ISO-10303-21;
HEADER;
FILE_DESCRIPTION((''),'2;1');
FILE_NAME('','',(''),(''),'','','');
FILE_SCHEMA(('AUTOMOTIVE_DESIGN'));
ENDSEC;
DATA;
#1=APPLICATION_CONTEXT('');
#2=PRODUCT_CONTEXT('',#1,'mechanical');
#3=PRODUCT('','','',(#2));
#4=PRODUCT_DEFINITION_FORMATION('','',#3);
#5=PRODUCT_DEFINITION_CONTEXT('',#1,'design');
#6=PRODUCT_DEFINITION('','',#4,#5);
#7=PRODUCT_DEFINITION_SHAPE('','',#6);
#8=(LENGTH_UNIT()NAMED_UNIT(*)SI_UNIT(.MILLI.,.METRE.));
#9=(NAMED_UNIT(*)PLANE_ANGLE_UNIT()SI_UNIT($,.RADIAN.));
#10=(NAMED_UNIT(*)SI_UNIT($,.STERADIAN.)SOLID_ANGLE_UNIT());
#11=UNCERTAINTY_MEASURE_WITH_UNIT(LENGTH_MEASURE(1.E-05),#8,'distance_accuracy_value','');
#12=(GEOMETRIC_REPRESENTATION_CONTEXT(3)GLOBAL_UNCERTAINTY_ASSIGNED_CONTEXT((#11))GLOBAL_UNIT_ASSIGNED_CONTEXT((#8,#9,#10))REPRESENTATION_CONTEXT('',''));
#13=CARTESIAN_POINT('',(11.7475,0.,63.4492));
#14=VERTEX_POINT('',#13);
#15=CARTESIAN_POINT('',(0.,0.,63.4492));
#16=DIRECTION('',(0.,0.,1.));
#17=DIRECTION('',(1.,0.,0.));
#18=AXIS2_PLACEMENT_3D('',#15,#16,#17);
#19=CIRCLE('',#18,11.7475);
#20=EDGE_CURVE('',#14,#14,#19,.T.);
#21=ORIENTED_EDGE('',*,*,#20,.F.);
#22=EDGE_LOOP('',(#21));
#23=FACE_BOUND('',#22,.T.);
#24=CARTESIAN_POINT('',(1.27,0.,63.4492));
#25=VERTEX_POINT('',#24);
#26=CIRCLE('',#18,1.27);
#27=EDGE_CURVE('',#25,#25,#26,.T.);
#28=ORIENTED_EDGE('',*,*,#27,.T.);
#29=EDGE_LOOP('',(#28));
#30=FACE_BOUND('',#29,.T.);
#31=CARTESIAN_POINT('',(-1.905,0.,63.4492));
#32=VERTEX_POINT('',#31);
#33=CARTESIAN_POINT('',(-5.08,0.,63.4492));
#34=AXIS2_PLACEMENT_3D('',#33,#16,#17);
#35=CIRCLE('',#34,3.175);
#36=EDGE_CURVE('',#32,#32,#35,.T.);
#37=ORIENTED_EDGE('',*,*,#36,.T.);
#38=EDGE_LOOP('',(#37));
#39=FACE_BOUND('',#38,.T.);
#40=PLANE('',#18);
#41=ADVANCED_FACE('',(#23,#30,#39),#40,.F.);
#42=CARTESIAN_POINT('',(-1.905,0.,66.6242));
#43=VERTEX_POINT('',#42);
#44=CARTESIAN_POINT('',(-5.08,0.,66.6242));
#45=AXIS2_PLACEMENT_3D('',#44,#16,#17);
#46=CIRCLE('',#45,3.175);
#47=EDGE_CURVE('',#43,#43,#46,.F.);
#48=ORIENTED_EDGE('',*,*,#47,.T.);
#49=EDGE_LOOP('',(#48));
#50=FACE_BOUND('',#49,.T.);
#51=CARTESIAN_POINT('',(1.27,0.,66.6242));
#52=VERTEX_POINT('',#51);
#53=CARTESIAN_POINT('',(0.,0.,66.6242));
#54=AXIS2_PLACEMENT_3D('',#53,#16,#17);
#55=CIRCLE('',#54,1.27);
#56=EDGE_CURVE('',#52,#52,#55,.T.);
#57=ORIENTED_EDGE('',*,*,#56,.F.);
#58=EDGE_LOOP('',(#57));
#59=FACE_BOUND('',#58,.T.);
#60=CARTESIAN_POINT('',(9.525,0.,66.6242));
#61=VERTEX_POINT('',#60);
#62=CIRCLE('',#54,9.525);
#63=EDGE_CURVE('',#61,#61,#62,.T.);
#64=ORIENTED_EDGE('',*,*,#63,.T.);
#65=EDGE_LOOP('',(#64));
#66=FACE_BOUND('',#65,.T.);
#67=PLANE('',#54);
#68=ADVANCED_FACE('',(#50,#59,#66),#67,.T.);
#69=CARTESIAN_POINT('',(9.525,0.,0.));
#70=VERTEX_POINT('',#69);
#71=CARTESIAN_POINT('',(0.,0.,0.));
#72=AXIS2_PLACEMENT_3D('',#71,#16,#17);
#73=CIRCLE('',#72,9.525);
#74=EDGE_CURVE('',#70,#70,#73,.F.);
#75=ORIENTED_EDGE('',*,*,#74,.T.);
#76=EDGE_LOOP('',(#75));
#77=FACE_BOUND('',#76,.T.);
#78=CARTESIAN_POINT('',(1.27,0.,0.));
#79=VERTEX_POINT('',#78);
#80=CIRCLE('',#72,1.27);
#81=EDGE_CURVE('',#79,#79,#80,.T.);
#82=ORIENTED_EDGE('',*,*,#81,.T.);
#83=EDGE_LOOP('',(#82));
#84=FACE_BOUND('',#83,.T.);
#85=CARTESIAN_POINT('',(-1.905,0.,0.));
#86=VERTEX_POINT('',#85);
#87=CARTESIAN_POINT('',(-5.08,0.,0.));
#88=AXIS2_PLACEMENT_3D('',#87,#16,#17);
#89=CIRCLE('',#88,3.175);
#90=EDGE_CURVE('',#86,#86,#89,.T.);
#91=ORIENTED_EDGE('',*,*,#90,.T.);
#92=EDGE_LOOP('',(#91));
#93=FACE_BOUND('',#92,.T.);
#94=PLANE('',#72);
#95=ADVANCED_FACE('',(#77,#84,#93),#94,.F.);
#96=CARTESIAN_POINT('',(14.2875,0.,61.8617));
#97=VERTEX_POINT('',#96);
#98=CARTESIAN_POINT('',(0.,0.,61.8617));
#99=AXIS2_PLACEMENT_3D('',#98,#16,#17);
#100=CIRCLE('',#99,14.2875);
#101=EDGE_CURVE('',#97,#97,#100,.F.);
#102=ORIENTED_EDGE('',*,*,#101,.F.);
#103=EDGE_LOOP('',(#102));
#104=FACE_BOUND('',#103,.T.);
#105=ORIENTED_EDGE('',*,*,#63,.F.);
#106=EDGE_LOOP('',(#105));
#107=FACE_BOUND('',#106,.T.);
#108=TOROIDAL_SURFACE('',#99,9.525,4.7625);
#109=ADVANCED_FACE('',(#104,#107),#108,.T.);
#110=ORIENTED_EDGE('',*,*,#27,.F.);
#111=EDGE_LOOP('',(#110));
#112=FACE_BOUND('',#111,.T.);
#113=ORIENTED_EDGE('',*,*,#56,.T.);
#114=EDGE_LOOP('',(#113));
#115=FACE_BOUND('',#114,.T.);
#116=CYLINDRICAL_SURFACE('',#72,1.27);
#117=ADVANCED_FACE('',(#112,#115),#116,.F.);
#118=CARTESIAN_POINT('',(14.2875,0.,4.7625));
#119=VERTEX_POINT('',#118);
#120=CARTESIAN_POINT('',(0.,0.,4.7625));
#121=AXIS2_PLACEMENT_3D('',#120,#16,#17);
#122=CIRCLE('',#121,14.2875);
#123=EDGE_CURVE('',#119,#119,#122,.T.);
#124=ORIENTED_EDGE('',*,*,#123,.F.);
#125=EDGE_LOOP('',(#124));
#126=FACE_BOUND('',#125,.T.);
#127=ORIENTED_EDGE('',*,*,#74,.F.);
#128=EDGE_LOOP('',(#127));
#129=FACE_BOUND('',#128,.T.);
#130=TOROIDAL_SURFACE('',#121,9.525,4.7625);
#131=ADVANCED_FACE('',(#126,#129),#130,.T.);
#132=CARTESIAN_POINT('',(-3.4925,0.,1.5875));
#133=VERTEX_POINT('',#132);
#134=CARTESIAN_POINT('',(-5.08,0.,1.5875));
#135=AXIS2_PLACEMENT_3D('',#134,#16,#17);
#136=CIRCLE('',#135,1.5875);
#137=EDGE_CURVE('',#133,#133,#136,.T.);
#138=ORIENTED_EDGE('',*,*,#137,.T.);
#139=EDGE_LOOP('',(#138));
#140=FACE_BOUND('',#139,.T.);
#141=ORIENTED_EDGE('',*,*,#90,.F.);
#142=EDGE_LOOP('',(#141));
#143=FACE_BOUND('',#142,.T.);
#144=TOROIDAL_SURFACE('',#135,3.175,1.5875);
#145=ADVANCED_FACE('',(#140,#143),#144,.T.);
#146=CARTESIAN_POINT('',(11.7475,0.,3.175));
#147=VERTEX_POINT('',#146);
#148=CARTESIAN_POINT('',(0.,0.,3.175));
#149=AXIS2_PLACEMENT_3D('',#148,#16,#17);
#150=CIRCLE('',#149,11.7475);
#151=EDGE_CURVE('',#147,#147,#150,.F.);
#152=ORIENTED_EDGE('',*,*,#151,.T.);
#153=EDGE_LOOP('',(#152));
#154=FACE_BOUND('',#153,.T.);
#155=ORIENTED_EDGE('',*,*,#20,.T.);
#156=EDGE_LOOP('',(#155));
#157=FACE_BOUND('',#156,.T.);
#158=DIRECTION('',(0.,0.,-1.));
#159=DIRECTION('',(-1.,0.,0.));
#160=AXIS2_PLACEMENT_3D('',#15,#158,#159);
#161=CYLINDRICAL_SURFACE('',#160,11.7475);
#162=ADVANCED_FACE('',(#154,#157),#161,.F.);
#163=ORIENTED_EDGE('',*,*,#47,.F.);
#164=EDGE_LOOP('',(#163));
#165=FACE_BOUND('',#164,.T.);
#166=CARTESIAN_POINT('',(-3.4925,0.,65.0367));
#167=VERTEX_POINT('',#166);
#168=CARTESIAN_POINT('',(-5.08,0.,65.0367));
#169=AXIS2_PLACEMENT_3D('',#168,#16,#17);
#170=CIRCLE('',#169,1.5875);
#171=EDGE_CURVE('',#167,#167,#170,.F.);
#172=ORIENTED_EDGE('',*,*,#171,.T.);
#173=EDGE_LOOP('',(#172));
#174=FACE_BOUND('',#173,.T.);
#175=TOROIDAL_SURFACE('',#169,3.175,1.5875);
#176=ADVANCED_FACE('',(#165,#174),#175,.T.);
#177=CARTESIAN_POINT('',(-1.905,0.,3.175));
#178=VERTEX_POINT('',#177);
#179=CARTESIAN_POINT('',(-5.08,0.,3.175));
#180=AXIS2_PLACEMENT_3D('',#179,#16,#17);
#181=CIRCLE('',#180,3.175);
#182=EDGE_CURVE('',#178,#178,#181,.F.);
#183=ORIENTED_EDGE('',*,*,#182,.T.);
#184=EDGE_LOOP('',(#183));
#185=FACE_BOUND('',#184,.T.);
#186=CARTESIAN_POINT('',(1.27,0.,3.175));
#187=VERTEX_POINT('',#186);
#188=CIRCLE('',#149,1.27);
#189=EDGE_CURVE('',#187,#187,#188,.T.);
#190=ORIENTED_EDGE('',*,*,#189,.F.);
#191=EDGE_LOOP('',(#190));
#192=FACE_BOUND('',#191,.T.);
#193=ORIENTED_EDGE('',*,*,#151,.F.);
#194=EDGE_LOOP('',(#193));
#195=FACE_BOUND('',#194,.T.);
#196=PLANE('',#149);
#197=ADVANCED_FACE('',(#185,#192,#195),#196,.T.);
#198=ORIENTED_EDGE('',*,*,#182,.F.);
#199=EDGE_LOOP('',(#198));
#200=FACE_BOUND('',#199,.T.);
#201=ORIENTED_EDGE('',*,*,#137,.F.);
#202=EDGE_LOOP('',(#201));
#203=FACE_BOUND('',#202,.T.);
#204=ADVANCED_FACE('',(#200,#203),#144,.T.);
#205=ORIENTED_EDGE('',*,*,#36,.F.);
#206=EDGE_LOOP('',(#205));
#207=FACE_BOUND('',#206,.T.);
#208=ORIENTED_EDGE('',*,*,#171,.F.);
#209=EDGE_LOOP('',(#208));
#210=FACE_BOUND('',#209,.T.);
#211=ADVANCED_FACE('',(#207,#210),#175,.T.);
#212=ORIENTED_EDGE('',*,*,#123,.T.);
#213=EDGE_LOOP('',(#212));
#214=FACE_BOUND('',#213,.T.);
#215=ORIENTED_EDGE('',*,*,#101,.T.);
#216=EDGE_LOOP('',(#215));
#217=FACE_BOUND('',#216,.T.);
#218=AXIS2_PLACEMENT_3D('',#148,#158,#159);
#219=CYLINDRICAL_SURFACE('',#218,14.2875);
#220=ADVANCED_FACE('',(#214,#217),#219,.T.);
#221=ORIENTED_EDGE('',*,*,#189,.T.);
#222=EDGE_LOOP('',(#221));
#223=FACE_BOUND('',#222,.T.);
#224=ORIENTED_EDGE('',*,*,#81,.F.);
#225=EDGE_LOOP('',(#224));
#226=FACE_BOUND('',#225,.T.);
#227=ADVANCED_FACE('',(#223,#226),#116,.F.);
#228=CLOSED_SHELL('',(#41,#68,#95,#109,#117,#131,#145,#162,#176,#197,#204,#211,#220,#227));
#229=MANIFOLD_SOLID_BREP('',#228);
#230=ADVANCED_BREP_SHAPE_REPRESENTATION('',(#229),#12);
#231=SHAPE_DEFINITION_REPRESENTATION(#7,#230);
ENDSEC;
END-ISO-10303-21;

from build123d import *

# Parameters (mm, degrees)
SKETCH2_R           = 14.2875
BOSS_EXTRUDE1_DEPTH = 3.175
SKETCH3_R           = 14.2875
SKETCH3_R_2         = 11.7475
BOSS_EXTRUDE2_DEPTH = 60.2742
SKETCH4_R           = 14.2875
BOSS_EXTRUDE3_DEPTH = 3.175
SKETCH5_R           = 1.27
SKETCH5_R_2         = 1.5875
CUT_EXTRUDE1_DEPTH  = 70.620753645
FILLET1_R           = 4.7625
FILLET2_R           = 1.5875


with BuildPart() as part:
    # Sketch2 → Boss-Extrude1 (new body)
    with BuildSketch(Plane.XY):
        Circle(SKETCH2_R)
    extrude(amount=BOSS_EXTRUDE1_DEPTH)

    # Sketch3 → Boss-Extrude2 (add)
    with BuildSketch(Plane.XY.offset(3.175)):
        Circle(SKETCH3_R)
        Circle(SKETCH3_R_2, mode=Mode.SUBTRACT)
    extrude(amount=BOSS_EXTRUDE2_DEPTH)

    # Sketch4 → Boss-Extrude3 (add)
    with BuildSketch(Plane.XY.offset(63.4492)):
        Circle(SKETCH4_R)
    extrude(amount=BOSS_EXTRUDE3_DEPTH)

    # Sketch5 → Cut-Extrude1 (cut, through all)
    with BuildSketch(Plane.XY.offset(66.6242)):
        Circle(SKETCH5_R)
        with Locations((-5.08, 0)):
            Circle(SKETCH5_R_2)
    extrude(amount=-CUT_EXTRUDE1_DEPTH, mode=Mode.SUBTRACT)

    # Fillet1
    fillet1_edges = [part.edges().sort_by_distance(p)[0] for p in [
        (-14.2875, 0, 66.6242),
        (-14.2875, 0, 0),
    ]]
    fillet(fillet1_edges, radius=FILLET1_R)

    # Fillet2
    fillet2_edges = [part.edges().sort_by_distance(p)[0] for p in [
        (-6.6675, 0, 3.175),
        (-6.6675, 0, 63.4492),
        (-6.6675, 0, 0),
        (-6.6675, 0, 66.6242),
    ]]
    fillet(fillet2_edges, radius=FILLET2_R - 0.0001)  # a hair under: the kernel refuses the full size


solid = part.part
